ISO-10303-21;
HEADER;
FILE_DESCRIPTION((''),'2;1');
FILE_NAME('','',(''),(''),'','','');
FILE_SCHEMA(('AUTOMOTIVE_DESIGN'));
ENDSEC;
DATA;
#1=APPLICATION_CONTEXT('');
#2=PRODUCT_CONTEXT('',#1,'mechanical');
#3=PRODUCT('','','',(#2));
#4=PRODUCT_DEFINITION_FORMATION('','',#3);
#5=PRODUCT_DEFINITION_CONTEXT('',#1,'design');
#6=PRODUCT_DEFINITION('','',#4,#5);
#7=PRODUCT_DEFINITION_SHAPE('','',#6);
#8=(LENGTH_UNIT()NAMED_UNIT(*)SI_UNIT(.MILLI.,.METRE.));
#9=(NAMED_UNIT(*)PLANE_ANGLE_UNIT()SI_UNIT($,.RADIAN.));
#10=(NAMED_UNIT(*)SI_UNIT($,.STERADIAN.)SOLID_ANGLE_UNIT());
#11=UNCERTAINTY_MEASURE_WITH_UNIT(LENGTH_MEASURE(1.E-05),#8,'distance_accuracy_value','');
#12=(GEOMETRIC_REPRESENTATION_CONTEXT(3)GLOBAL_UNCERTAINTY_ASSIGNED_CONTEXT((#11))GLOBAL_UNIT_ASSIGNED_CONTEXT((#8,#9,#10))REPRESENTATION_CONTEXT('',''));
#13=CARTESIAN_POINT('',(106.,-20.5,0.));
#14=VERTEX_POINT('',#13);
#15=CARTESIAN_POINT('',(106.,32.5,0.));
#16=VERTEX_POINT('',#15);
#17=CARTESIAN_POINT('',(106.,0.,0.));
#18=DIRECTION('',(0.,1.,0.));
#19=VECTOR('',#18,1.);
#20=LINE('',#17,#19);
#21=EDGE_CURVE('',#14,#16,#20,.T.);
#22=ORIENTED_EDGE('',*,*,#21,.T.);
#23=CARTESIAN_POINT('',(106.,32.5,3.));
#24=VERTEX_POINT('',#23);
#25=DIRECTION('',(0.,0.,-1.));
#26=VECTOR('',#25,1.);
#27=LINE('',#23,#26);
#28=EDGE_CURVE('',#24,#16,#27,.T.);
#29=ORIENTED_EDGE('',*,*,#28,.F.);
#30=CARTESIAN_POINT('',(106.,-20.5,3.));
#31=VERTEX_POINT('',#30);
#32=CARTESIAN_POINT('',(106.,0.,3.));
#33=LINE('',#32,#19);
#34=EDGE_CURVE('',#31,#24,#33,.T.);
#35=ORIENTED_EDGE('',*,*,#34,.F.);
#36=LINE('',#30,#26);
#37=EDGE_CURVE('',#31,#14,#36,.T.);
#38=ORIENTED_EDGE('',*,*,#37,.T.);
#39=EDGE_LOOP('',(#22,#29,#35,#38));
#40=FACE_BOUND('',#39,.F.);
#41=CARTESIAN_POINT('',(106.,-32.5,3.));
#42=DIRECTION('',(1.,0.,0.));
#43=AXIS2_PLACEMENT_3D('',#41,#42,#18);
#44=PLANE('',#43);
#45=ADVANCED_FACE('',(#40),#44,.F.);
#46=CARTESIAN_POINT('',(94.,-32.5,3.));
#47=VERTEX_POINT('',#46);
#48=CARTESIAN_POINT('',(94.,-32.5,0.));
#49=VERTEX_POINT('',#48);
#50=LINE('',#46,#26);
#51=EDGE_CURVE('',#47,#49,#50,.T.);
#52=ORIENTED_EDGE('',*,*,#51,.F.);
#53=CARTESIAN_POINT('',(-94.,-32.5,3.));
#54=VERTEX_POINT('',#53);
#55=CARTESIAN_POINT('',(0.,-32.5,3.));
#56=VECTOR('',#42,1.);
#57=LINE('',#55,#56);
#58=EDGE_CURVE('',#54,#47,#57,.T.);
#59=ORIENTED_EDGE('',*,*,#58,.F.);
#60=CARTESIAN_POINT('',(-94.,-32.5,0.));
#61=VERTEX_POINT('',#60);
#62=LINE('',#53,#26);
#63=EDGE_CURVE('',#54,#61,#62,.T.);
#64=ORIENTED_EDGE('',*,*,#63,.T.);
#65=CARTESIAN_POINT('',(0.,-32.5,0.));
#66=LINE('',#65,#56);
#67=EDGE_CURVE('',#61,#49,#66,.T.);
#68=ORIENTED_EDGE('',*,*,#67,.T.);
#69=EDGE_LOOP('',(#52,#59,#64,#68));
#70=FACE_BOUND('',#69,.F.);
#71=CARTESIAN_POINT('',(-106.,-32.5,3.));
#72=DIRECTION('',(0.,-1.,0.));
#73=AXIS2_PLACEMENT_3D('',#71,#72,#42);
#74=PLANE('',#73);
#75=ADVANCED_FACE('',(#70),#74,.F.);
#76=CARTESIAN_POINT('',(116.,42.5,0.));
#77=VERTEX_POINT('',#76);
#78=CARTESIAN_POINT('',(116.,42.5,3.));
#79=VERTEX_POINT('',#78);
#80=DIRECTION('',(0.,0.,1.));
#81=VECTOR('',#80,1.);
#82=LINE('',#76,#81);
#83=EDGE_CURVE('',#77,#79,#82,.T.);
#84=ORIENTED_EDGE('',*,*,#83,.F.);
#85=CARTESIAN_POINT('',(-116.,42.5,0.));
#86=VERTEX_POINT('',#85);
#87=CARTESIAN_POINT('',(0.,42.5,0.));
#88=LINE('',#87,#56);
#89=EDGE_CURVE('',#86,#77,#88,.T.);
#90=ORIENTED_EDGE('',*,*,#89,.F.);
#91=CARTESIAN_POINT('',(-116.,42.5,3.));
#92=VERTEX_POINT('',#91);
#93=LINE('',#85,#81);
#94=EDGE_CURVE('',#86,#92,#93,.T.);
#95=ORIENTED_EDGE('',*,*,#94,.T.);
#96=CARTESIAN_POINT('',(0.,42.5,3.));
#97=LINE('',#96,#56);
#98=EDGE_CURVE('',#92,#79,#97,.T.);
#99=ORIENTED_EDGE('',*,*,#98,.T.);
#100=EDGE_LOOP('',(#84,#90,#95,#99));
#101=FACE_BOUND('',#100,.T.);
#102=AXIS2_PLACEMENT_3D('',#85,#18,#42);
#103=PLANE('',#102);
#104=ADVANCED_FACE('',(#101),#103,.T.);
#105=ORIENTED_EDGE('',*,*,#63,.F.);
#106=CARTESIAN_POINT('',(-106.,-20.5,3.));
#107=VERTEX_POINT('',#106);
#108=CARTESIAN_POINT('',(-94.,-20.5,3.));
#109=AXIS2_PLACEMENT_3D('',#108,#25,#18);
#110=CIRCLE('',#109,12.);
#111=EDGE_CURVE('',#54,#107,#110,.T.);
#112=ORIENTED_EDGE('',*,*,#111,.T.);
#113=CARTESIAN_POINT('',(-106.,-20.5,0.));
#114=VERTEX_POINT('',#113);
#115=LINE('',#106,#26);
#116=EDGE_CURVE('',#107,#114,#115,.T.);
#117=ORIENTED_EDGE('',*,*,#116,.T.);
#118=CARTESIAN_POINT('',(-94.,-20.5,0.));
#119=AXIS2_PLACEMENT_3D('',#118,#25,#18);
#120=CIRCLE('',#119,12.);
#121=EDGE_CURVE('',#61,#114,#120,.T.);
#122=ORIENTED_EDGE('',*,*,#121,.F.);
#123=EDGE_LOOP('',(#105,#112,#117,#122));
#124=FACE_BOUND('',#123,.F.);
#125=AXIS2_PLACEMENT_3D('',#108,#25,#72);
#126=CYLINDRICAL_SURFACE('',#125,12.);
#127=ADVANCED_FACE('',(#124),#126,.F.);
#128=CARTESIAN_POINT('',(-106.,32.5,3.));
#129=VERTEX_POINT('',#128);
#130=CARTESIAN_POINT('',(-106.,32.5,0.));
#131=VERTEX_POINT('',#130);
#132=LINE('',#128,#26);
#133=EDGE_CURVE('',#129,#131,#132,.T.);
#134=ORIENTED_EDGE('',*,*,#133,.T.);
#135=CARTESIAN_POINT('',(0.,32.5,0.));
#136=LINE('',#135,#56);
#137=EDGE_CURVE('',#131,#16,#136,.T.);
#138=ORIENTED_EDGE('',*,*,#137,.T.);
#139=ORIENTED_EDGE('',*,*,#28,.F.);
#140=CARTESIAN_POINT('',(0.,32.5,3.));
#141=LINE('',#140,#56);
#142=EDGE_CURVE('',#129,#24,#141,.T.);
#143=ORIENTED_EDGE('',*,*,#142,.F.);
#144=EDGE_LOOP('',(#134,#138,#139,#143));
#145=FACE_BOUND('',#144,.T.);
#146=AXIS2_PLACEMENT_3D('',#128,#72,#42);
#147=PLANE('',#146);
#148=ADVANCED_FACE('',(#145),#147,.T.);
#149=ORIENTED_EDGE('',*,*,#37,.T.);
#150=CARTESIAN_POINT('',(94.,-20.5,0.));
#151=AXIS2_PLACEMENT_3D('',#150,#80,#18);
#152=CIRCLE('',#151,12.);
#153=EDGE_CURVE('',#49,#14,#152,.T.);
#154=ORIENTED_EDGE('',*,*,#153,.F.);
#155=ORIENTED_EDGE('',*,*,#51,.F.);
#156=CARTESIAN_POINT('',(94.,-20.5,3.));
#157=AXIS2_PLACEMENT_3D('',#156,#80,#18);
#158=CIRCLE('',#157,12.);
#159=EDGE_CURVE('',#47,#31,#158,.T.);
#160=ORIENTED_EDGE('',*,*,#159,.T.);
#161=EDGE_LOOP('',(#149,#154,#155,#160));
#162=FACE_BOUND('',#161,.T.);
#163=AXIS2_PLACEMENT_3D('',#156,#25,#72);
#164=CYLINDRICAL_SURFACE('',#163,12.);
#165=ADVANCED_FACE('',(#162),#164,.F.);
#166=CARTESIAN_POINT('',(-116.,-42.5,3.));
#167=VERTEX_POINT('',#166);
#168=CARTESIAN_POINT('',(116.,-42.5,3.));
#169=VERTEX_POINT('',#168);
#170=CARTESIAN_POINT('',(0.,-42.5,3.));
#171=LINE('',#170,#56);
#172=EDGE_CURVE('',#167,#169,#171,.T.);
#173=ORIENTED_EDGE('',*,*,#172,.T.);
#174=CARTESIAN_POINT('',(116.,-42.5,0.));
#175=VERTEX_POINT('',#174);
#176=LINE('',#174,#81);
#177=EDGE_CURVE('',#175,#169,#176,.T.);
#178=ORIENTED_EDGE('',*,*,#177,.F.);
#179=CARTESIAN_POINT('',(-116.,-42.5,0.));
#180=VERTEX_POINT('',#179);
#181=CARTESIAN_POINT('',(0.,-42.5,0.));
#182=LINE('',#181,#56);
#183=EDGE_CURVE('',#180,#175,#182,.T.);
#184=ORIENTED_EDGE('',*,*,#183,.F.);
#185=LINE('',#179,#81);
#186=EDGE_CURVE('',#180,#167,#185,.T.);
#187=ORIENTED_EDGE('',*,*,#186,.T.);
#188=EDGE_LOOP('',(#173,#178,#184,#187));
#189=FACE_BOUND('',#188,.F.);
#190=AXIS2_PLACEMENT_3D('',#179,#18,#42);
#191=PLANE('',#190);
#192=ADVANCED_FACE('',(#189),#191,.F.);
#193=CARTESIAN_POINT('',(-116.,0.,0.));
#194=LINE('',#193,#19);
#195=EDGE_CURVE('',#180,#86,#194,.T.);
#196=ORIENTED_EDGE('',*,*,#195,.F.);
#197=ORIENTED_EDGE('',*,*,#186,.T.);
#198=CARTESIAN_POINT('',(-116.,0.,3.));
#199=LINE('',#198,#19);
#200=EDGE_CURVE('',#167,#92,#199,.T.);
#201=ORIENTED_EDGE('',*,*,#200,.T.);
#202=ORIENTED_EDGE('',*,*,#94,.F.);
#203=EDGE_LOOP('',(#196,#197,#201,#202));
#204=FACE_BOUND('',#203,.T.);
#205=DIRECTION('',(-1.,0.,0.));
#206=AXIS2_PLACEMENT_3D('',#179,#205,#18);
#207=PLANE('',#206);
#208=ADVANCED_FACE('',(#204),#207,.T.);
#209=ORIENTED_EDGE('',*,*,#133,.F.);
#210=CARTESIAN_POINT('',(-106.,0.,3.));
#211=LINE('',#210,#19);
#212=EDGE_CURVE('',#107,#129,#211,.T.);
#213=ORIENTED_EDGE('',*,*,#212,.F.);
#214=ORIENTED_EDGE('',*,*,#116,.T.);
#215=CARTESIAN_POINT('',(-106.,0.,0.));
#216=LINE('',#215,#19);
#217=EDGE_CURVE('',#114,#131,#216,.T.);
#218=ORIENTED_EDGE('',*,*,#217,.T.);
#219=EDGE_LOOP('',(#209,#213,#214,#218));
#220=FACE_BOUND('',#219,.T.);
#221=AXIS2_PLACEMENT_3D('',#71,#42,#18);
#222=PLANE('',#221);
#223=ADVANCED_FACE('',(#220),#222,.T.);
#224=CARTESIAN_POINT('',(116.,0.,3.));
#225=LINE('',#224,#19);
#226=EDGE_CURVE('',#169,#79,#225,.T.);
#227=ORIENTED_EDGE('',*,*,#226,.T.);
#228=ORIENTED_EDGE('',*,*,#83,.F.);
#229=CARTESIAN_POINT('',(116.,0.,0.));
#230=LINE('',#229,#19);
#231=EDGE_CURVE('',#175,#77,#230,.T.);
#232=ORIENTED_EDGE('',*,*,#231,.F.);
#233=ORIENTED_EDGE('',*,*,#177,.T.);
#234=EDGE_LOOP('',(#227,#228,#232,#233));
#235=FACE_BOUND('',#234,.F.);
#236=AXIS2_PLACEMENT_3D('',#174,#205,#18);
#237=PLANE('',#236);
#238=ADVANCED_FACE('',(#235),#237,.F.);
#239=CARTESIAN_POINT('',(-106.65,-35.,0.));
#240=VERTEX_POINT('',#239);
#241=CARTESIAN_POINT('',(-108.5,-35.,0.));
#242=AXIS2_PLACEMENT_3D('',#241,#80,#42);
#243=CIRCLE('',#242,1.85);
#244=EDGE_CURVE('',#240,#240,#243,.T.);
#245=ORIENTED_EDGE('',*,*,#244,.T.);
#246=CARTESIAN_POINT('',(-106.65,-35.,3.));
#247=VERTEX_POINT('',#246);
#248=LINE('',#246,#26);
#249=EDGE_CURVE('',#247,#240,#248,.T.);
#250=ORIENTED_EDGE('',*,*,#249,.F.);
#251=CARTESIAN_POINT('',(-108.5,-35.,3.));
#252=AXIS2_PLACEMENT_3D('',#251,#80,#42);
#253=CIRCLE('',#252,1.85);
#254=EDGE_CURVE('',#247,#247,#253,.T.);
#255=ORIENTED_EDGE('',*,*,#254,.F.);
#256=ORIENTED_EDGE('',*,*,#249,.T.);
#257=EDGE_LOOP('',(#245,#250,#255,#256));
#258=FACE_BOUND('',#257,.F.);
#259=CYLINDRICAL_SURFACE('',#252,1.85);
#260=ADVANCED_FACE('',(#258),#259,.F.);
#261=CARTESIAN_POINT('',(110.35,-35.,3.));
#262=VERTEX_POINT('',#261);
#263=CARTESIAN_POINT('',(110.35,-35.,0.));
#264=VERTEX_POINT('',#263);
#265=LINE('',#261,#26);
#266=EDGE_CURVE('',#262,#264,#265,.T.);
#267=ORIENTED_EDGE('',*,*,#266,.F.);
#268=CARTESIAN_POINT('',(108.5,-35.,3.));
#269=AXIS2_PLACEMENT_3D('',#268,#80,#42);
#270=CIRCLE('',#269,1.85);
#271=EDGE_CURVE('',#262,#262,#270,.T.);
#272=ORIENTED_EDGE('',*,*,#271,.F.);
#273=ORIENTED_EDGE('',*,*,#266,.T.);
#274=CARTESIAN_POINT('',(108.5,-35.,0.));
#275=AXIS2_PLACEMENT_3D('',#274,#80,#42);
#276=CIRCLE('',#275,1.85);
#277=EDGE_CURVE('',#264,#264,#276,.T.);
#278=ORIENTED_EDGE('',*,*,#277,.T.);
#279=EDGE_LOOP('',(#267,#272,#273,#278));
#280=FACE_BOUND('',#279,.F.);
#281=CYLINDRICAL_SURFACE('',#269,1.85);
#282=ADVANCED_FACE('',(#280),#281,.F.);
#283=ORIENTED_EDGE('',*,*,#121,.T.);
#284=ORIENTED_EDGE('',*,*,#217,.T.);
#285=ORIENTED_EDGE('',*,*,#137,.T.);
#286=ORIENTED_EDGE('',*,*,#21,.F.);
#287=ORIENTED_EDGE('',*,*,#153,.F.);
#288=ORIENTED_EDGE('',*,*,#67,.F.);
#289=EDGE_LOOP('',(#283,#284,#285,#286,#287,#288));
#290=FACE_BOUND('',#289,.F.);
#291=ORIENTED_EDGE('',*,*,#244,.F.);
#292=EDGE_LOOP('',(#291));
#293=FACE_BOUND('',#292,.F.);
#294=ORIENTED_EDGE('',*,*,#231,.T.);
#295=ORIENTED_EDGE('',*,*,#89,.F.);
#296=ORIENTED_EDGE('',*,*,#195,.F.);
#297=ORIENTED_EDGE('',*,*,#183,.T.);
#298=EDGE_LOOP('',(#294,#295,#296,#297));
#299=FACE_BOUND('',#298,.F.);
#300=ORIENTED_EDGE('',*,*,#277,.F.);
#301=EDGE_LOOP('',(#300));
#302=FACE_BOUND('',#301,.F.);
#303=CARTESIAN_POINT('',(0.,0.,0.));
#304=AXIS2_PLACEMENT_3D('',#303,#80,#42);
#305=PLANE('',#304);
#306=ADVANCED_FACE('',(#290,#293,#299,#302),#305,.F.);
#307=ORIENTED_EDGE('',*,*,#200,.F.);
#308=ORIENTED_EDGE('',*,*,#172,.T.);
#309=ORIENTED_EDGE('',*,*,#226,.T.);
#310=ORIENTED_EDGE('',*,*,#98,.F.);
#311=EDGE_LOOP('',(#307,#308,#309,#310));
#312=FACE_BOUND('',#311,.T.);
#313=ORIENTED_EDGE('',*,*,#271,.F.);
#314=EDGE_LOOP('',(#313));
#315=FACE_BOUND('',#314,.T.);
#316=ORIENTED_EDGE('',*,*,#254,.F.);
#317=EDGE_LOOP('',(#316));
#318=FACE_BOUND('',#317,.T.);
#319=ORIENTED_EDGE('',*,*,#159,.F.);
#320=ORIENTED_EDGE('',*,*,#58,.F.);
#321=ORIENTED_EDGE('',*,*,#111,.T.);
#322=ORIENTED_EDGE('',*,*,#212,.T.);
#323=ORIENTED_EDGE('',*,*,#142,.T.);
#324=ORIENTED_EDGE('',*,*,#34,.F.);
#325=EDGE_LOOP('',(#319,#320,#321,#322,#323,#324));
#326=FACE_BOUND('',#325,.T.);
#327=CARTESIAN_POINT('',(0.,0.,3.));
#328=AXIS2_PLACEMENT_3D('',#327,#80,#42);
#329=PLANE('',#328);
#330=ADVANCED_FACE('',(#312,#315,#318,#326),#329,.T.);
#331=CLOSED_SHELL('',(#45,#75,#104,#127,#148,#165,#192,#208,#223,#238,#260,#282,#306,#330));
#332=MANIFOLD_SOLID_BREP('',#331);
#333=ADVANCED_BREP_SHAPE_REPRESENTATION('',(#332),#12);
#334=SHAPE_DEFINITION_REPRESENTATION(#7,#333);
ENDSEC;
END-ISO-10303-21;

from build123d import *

# Parameters (mm, degrees)
F0_W     = 232
F0_H     = 85
F2_DEPTH = 3
F3_W     = 212
F3_H     = 65
F4_DEPTH = 3
F5_R     = 12
F6_R     = 1.85
F7_DEPTH = 3


# Not quite as in the source:
# - a feature names something its author has since deleted; it is built from what else it names


with BuildPart() as f2:
    # F0 (on Top) → F2 (new body)
    with BuildSketch(Plane.XY):
        Rectangle(F0_W, F0_H)
    extrude(amount=F2_DEPTH)

    # F3 (on face) → F4 (cut)
    with BuildSketch(Plane.XY.offset(3)):
        Rectangle(F3_W, F3_H)
    extrude(amount=-F4_DEPTH, mode=Mode.SUBTRACT)

    # F5
    f5_edges = [f2.edges().sort_by_distance(p)[0] for p in [
        (-106, -32.5, 1.5),
        (106, -32.5, 1.5),
    ]]
    fillet(f5_edges, radius=F5_R)

    # F6 (on face) → F7 (cut)
    with BuildSketch(Plane.XY.offset(3)):
        with Locations((-108.5, -35)):
            Circle(F6_R)
        with Locations((108.5, -35)):
            Circle(F6_R)
    extrude(amount=-F7_DEPTH, mode=Mode.SUBTRACT)


solid = f2.part
